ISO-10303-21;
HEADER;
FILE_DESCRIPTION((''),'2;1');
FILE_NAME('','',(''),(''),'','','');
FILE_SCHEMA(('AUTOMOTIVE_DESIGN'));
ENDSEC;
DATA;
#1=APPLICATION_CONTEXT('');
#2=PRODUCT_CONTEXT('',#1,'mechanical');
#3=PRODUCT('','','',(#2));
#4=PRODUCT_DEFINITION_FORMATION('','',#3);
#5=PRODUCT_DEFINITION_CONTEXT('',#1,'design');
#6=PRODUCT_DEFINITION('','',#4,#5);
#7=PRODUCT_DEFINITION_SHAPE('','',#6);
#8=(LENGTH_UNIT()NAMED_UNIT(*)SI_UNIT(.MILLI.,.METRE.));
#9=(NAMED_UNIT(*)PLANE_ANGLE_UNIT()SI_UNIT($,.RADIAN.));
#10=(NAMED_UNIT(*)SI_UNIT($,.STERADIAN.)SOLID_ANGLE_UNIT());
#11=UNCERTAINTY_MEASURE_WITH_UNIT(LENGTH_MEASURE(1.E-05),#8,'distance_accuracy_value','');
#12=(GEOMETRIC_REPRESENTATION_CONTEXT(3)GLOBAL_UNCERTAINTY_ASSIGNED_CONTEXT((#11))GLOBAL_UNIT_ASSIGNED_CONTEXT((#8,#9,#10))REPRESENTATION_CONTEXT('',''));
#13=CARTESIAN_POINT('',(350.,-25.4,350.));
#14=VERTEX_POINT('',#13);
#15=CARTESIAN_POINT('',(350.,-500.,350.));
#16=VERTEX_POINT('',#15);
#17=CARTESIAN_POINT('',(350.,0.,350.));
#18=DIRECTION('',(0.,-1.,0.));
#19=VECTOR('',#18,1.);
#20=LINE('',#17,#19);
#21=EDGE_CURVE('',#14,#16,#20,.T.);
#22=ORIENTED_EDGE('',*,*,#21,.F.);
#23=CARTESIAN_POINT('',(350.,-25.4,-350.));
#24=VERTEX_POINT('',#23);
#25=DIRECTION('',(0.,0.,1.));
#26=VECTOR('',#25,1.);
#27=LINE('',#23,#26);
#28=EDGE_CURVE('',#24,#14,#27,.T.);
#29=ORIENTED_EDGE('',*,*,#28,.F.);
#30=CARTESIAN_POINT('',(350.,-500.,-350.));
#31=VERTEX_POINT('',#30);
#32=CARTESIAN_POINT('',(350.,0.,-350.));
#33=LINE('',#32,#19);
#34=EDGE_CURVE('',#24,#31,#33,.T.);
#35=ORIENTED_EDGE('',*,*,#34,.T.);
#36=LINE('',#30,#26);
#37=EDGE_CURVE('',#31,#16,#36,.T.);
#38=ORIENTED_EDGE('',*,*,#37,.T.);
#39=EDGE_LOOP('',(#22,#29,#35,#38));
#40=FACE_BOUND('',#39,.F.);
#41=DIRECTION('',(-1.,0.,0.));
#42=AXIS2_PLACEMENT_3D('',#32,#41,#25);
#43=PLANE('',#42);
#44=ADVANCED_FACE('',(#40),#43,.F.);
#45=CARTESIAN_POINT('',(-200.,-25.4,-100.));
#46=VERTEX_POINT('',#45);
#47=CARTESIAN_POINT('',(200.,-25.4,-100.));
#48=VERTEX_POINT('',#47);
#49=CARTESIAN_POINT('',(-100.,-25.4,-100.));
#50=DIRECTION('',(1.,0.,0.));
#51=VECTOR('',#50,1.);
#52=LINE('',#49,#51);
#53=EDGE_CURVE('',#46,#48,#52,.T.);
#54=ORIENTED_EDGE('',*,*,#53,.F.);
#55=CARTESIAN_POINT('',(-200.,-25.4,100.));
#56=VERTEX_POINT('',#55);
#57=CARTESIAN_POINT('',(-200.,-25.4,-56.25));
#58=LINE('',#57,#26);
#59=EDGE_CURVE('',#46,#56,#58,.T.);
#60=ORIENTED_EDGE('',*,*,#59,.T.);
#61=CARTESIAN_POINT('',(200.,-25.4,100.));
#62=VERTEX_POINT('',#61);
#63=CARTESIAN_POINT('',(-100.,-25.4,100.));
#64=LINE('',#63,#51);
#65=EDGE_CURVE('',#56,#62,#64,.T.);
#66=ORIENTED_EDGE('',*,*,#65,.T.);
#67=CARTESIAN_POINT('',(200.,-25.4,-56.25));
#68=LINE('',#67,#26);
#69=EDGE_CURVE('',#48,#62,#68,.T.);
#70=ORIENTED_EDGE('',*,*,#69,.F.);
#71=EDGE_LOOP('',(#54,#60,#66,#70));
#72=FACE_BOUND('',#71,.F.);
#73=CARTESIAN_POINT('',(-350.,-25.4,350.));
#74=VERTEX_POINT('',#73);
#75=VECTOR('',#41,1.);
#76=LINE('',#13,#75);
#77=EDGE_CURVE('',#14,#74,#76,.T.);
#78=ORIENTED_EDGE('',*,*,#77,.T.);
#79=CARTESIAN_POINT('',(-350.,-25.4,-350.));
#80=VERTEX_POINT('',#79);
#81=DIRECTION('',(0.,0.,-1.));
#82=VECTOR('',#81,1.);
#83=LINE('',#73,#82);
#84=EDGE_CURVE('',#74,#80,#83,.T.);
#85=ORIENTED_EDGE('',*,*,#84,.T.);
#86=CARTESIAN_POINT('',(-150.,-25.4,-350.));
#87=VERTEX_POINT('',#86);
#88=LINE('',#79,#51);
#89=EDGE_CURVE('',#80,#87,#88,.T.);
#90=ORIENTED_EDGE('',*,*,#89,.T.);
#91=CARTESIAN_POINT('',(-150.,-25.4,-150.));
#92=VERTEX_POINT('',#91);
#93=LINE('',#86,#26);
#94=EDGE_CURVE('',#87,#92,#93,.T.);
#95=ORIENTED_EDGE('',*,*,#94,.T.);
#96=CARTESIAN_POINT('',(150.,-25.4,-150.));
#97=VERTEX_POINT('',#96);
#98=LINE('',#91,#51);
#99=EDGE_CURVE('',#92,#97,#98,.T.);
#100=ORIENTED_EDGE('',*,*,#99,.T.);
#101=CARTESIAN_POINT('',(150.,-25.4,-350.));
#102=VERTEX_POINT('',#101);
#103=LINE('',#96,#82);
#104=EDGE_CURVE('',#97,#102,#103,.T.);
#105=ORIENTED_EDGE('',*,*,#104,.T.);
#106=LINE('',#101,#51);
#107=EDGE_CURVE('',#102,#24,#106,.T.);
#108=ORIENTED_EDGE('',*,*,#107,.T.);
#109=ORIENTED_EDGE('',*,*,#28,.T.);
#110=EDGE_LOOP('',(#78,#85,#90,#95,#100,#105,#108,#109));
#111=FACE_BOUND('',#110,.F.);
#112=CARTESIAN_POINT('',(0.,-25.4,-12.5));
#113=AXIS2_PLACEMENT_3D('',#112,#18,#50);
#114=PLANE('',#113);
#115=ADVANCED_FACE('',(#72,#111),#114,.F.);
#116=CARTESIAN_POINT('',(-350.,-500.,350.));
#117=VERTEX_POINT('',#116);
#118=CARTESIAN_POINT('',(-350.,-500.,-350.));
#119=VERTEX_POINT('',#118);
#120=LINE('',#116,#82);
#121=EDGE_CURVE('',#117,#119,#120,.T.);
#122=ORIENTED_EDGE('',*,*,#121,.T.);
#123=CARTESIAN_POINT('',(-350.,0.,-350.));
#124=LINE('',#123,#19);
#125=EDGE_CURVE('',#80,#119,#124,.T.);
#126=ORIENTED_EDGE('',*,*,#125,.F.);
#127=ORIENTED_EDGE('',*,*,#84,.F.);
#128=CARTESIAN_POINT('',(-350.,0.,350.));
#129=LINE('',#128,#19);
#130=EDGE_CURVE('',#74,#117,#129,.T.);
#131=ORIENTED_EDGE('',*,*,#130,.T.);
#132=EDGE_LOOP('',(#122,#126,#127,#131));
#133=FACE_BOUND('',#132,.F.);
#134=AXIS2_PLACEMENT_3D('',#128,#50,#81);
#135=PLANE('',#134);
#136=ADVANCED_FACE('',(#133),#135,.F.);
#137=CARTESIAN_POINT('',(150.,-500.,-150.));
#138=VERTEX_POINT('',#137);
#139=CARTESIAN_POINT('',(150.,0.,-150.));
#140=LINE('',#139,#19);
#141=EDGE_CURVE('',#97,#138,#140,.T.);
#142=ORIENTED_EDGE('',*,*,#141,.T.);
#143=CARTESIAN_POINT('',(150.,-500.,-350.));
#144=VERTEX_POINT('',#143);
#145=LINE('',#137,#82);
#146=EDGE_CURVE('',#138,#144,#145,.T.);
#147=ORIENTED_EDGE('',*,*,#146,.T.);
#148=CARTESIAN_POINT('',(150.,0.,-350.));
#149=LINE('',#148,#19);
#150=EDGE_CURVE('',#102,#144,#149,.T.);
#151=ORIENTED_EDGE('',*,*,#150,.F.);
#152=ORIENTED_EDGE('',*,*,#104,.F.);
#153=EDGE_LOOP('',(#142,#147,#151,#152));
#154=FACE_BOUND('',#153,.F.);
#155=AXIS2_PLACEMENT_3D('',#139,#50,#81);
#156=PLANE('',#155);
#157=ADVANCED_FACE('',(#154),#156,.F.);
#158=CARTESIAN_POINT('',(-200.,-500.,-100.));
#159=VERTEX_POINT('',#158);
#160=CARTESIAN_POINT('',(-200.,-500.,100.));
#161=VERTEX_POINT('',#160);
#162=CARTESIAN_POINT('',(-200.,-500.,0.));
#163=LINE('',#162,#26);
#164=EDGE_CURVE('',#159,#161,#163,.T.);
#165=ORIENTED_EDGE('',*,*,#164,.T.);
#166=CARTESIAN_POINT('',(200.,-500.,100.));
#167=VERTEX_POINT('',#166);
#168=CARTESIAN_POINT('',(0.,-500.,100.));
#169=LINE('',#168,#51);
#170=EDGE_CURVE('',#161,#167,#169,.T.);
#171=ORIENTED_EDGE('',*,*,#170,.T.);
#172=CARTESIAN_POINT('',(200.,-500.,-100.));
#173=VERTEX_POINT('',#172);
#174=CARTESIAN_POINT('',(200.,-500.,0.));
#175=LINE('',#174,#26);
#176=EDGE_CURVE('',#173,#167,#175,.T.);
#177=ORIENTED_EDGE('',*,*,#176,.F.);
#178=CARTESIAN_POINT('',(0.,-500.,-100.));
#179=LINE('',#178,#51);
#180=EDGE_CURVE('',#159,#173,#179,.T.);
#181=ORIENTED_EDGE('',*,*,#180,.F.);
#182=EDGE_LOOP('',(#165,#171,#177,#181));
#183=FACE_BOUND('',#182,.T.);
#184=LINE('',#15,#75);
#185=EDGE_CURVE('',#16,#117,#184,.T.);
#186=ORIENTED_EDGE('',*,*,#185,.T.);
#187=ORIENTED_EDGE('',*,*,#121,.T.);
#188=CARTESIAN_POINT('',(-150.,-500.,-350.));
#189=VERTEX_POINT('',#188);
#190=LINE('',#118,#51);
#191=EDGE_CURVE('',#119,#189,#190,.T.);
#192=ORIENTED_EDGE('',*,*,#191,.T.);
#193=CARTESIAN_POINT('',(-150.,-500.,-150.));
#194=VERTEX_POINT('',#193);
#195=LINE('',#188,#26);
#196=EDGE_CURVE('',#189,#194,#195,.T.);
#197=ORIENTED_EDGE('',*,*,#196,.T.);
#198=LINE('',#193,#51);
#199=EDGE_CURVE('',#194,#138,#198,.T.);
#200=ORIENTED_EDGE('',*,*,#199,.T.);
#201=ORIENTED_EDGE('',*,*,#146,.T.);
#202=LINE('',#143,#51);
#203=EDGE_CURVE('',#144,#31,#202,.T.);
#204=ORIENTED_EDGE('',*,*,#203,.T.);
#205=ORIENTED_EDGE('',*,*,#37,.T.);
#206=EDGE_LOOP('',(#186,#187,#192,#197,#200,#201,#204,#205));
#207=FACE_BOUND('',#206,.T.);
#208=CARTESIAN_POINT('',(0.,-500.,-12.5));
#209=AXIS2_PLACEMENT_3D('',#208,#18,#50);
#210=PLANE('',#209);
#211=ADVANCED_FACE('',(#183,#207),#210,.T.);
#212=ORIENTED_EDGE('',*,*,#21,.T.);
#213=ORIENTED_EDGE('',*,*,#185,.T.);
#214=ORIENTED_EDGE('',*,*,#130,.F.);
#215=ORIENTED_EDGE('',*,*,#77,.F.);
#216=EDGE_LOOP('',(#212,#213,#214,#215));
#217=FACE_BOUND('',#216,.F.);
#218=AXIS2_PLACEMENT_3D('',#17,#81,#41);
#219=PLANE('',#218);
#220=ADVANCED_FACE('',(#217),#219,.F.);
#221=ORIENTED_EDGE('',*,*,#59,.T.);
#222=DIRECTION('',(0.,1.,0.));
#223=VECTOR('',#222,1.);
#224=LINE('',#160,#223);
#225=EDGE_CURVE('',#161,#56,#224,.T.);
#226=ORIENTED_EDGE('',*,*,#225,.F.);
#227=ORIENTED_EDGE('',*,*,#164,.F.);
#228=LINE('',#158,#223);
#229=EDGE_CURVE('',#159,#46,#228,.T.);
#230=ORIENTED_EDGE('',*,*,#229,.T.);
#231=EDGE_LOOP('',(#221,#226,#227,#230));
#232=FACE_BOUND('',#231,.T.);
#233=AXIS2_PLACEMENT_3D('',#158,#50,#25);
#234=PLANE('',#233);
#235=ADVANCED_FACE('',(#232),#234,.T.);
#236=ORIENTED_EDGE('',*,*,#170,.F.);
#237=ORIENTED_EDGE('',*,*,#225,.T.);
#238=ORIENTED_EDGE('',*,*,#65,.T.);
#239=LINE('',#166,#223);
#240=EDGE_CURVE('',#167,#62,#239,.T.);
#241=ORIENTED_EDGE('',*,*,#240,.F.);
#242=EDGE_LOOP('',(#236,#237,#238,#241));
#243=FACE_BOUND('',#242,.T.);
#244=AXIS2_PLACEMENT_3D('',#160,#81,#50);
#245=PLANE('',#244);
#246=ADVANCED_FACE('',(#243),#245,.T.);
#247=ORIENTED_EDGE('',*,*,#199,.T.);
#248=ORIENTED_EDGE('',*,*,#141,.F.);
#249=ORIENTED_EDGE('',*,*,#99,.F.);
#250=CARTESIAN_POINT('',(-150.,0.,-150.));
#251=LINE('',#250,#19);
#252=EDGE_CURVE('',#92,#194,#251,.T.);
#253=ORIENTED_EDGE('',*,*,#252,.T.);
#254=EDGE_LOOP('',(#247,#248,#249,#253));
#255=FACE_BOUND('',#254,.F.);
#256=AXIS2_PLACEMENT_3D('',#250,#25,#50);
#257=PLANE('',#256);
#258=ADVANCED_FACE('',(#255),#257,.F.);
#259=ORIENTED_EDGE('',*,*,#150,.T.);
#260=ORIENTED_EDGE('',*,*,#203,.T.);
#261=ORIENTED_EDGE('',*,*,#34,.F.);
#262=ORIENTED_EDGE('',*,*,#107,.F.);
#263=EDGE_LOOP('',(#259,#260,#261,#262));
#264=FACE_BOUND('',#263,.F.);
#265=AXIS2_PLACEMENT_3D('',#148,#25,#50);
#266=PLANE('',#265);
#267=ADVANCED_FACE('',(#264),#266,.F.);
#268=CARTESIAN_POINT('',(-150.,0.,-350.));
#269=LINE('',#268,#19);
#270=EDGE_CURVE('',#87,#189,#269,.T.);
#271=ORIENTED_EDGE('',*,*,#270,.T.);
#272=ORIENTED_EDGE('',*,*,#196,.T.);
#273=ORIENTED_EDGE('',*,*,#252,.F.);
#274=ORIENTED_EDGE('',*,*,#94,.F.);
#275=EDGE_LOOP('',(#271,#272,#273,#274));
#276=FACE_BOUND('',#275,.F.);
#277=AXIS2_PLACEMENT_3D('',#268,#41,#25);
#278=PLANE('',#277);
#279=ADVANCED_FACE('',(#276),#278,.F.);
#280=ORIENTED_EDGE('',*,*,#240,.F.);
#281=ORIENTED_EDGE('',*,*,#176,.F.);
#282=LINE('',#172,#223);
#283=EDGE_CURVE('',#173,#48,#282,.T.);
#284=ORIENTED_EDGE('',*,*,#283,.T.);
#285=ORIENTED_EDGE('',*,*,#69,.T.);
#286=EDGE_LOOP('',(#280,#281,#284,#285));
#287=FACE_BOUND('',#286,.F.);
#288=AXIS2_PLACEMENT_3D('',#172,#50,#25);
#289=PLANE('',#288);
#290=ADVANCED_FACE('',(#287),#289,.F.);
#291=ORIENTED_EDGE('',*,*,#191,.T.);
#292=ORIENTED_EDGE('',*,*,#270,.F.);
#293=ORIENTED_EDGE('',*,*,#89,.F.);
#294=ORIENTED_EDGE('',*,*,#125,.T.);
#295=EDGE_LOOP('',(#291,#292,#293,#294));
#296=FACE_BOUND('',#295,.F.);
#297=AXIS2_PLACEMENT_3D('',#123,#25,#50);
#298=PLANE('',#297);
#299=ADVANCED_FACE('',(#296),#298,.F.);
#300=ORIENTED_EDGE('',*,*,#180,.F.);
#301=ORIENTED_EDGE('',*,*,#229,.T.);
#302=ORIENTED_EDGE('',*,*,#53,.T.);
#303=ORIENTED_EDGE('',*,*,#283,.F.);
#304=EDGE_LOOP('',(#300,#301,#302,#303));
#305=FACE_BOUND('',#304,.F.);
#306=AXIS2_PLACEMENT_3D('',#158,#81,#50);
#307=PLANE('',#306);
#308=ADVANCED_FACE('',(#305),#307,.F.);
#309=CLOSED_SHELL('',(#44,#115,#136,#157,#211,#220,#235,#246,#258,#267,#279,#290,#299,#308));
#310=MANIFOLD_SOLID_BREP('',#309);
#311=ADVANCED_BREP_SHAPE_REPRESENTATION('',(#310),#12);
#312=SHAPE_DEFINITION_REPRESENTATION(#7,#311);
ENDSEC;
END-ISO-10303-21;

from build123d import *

# Parameters (mm, degrees)
F1_DEPTH = 500
F3_DEPTH = 25.4
F4_W     = 400
F4_H     = 200
F5_DEPTH = 474.601


# Not quite as in the source:
# - a feature names something its author has since deleted; it is built from what else it names


with BuildPart() as f1:
    # F0 (on Front) → F1 (new body)
    with BuildSketch(Plane.XZ):
        Polygon((350, -350), (350, 350), (-350, 350), (-350, -350), (-150, -350), (-150, -150), (150, -150), (150, -350), align=None)
    extrude(amount=F1_DEPTH)

    # F3 (cut): a face of the model
    f3_faces = [f1.faces().sort_by_distance(p)[0] for p in [
        (0, 0, 34.8837209302),
    ]]
    extrude(f3_faces, amount=-F3_DEPTH, mode=Mode.SUBTRACT)

    # F4 (on face) → F5 (cut, through all)
    with BuildSketch(Plane.XZ.offset(500)):
        Rectangle(F4_W, F4_H)
    extrude(amount=-F5_DEPTH, mode=Mode.SUBTRACT)


solid = f1.part
